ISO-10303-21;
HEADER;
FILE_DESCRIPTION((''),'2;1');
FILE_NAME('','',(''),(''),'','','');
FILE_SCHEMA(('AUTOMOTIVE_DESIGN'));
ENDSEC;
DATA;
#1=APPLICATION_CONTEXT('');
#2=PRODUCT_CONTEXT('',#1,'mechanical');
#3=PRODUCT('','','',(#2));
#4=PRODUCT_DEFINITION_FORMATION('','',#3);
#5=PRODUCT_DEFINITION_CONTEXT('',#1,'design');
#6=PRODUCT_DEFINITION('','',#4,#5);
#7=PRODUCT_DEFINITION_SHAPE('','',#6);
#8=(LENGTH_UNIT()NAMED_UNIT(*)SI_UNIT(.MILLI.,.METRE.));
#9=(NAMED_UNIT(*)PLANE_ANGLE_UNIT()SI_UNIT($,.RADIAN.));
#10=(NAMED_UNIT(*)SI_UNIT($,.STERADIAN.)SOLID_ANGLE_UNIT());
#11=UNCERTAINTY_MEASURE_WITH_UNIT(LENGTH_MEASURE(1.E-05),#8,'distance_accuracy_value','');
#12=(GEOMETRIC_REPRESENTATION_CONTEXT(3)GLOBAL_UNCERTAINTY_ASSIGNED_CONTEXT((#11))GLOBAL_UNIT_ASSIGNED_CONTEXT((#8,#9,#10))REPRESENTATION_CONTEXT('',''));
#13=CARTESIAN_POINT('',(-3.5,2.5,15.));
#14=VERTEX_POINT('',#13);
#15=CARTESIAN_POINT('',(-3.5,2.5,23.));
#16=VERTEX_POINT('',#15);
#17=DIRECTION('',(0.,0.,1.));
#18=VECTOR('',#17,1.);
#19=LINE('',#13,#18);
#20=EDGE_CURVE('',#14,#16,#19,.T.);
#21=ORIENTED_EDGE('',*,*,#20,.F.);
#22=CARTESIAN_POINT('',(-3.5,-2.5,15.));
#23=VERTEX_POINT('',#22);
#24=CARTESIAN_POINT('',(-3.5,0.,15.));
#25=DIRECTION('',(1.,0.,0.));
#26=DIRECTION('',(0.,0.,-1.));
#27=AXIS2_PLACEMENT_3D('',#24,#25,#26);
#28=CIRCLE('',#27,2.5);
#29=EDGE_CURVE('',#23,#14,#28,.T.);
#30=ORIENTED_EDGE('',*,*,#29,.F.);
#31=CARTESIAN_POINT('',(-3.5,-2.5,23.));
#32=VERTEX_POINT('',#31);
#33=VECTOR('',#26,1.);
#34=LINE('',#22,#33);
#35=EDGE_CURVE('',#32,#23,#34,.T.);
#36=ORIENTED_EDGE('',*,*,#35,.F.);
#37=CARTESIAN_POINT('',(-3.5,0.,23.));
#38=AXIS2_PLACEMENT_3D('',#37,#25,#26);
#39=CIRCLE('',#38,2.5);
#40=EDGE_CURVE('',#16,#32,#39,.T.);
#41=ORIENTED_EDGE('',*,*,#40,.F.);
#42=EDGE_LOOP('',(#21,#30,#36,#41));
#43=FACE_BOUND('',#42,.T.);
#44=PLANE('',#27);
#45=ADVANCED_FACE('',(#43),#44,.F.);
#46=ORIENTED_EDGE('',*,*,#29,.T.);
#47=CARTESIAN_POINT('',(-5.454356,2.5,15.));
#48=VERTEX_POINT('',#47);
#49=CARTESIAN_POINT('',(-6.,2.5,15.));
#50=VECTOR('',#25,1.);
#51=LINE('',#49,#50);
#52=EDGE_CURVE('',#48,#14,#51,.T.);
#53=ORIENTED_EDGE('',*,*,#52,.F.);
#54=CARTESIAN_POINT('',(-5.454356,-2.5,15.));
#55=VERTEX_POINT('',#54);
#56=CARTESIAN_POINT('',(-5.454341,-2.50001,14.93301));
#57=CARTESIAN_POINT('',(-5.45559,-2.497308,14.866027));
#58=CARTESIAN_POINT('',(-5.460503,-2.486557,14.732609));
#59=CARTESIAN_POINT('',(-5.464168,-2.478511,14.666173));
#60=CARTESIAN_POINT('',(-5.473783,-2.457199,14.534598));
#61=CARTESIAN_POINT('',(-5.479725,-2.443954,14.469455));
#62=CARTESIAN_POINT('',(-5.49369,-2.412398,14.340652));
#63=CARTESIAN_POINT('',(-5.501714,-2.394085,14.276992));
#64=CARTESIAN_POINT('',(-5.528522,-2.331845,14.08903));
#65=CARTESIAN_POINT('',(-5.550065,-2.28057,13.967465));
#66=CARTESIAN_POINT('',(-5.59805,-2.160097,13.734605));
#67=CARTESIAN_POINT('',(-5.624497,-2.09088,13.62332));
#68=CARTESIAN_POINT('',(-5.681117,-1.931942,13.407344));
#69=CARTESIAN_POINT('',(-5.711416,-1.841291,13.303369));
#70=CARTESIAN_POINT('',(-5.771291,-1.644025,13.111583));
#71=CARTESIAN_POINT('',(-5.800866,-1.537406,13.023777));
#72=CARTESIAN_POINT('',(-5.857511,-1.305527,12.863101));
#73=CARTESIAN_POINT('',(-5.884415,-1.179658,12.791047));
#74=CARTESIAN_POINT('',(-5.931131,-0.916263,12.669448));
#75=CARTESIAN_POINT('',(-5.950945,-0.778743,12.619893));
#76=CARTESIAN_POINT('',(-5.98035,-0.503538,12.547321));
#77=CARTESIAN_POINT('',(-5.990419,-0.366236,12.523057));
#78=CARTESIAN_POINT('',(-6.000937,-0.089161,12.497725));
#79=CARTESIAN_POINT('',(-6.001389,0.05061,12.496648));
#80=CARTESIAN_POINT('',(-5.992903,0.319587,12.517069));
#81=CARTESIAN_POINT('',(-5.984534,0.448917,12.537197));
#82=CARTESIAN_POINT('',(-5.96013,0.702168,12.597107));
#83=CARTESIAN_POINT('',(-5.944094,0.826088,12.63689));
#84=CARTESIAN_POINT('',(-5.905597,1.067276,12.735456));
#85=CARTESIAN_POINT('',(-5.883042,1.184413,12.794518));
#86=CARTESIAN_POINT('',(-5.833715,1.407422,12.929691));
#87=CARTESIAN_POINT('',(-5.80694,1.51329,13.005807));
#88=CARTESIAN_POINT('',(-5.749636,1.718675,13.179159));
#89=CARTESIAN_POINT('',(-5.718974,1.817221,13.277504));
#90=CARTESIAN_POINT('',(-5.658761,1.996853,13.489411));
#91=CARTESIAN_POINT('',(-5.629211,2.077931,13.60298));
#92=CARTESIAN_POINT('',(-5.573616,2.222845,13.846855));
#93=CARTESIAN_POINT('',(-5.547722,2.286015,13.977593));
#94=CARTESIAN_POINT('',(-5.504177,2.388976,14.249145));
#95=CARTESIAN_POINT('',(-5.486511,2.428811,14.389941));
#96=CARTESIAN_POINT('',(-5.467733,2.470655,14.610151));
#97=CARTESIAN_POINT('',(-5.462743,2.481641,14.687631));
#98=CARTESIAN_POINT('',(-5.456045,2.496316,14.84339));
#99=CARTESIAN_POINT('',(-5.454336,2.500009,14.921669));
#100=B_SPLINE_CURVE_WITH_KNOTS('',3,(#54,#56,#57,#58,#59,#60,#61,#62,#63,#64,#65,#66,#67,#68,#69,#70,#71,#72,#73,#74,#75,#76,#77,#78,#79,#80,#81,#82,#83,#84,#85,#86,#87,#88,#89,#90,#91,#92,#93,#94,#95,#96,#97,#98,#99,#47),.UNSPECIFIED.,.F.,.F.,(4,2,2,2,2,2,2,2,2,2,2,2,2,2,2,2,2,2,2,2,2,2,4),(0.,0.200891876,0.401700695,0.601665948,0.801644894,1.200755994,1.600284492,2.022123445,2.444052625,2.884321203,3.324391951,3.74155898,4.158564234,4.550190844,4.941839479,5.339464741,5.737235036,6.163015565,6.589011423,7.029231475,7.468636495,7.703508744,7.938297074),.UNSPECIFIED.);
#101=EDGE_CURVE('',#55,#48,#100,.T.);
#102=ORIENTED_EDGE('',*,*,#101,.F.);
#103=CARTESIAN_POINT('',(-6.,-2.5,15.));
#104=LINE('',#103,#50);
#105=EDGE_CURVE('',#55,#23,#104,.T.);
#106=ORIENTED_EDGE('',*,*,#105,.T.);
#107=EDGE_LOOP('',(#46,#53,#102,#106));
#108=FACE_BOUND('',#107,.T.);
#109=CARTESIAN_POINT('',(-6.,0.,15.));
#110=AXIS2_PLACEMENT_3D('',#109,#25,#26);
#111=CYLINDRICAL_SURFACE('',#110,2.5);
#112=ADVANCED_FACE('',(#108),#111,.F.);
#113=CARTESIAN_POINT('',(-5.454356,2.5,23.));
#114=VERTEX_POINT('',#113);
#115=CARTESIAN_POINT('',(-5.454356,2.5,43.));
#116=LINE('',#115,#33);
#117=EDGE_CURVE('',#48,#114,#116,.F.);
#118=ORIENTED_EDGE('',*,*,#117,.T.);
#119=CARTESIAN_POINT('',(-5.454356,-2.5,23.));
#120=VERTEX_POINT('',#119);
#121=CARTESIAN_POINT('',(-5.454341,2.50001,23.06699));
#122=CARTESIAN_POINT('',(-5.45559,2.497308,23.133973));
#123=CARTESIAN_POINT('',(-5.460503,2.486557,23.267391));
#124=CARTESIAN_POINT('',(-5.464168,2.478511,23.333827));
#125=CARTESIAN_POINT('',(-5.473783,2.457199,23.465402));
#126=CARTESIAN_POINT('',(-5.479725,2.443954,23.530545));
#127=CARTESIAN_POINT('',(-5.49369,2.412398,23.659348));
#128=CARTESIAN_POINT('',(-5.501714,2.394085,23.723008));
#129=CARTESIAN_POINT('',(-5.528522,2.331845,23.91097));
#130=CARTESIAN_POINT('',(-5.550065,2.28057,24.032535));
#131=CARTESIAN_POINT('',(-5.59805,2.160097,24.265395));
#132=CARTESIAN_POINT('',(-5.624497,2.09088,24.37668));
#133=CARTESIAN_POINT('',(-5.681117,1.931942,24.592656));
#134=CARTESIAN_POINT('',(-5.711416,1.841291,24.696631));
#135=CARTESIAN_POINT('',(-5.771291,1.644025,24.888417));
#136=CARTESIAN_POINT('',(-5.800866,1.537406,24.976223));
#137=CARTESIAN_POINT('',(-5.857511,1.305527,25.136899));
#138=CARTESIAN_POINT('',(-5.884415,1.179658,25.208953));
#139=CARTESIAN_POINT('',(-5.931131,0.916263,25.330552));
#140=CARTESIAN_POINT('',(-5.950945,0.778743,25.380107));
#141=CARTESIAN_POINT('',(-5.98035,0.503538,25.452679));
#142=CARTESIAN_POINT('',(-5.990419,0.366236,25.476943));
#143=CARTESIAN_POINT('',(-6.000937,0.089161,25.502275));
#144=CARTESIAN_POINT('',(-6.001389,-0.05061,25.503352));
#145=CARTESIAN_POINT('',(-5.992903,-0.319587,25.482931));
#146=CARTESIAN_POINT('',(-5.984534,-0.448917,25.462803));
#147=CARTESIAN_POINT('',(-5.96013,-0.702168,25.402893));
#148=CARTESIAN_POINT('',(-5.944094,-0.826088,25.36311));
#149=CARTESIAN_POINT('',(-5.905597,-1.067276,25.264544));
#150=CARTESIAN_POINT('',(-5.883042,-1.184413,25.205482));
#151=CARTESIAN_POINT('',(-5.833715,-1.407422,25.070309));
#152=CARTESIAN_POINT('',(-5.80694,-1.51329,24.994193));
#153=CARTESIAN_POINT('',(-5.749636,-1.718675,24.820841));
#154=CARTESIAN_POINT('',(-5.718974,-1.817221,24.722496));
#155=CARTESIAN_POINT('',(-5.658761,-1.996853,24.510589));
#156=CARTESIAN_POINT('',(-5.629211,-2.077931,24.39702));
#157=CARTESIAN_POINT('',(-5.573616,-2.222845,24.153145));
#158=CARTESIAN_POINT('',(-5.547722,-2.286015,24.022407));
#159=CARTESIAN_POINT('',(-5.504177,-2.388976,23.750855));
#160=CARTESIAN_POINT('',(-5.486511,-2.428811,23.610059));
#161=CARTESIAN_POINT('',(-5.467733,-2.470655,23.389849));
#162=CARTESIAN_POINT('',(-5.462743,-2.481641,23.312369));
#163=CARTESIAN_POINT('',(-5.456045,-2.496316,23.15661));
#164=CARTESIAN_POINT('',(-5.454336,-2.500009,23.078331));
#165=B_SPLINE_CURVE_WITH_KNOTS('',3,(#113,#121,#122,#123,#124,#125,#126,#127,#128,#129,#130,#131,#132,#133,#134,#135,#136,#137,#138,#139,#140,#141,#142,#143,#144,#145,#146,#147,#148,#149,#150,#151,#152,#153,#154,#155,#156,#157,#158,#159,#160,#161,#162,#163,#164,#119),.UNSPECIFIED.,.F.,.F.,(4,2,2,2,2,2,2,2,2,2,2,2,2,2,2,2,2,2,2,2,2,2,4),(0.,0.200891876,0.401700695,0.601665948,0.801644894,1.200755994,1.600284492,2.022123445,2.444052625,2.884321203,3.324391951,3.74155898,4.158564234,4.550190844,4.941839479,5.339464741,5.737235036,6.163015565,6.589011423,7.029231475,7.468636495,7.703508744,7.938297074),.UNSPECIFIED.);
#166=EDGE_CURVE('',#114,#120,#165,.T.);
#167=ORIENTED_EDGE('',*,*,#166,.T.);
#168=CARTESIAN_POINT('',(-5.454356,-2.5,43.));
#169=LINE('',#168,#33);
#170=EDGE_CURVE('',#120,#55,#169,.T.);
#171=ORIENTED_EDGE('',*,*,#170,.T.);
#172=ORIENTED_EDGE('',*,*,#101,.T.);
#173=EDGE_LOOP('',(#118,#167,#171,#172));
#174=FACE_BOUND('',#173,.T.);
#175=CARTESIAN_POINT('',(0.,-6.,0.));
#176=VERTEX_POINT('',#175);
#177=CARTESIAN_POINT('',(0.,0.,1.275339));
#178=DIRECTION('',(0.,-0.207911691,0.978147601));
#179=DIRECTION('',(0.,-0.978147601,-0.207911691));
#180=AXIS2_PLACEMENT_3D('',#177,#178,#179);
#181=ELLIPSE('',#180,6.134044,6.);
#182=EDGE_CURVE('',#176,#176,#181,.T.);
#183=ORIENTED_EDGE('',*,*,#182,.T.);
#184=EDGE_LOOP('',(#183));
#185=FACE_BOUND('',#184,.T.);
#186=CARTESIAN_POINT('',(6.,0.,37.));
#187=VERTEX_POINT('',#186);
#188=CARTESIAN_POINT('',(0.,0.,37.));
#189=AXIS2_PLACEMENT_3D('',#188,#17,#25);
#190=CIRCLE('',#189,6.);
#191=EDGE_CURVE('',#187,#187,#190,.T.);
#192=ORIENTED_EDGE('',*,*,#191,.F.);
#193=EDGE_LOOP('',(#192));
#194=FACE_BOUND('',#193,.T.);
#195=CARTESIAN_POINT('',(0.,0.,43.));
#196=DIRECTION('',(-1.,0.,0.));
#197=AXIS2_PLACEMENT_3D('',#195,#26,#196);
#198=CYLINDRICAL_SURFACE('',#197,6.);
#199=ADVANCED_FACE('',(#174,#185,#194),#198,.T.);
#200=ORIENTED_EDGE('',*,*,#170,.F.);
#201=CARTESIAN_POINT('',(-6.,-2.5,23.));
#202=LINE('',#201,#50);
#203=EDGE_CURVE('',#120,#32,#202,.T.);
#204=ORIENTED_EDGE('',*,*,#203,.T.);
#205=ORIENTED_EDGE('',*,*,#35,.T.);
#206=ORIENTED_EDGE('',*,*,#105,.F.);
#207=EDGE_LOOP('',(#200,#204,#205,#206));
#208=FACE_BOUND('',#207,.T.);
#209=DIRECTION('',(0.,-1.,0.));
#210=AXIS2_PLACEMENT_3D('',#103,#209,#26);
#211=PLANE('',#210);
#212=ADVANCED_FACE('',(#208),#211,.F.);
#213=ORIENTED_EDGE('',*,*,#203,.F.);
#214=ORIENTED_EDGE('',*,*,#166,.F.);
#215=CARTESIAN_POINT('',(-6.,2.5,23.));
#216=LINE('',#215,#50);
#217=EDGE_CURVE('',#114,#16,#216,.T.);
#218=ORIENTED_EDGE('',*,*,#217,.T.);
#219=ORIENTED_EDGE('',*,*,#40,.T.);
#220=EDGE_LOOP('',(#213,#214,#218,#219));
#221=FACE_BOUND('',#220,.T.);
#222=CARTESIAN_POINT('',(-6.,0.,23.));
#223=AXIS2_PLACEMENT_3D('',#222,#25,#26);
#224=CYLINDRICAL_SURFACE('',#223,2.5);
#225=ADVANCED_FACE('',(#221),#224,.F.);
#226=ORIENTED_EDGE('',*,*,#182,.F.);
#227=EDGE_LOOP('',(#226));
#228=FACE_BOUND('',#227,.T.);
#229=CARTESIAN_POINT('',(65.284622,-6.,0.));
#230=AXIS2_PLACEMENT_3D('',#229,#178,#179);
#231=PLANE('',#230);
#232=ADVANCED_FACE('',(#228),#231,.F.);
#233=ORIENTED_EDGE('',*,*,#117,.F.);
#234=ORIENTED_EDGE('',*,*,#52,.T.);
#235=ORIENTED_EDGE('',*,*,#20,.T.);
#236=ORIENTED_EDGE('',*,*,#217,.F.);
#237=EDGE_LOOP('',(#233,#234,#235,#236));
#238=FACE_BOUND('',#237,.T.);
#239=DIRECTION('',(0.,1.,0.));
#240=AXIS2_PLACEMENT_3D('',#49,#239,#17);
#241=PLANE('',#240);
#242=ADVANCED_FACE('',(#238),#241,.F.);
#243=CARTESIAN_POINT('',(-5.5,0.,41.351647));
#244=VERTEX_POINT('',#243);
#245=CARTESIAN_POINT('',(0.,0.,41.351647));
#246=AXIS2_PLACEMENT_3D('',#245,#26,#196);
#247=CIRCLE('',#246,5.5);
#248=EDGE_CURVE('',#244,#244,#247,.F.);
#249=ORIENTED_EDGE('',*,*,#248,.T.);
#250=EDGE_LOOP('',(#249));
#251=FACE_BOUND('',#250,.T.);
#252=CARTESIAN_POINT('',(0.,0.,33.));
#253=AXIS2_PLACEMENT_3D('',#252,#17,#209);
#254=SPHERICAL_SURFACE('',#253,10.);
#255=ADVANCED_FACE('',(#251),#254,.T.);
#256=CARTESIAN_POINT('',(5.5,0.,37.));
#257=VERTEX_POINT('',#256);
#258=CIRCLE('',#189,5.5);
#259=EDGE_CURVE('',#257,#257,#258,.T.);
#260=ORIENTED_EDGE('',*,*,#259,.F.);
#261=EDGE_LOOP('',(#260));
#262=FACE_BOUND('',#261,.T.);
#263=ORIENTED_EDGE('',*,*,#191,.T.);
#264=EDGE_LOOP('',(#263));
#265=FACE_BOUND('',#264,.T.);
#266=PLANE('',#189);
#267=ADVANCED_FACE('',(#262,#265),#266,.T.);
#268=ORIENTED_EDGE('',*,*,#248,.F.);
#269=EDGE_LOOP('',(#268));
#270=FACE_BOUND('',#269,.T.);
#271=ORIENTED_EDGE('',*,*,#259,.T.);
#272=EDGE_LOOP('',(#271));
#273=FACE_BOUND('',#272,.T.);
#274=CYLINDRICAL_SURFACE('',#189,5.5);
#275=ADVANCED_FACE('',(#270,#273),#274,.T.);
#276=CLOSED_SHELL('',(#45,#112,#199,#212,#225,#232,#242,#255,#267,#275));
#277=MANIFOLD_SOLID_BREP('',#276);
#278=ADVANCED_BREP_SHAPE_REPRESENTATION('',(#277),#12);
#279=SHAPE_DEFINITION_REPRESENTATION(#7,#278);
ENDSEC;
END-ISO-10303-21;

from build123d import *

# Parameters (mm, degrees)
SKETCH_1_R               = 6
EXTRUDE_1_DEPTH          = 43
SKETCH_2_OUTSIDE_W       = 23.246
SKETCH_2_OUTSIDE_H       = 23.246
SKETCH_2_OUTSIDE_R       = 5.5
CUT_EXTRUDE_1_DEPTH      = 6
CUT_EXTRUDE_2_DEPTH      = 44.829214002
CUT_EXTRUDE_2_DEPTH_BACK = 44.829214002
CUT_EXTRUDE_START        = -3.5
CUT_EXTRUDE_3_DEPTH      = 41.329214002


# Read off the part's stored shape, not the designer's step: 替换面1
with BuildPart() as part:
    # 草图1 → 凸台-拉伸1 (new body)
    with BuildSketch(Plane.XY):
        Circle(SKETCH_1_R)
    extrude(amount=EXTRUDE_1_DEPTH)

    # 草图2 outside → 切除-拉伸1 (cut)
    with BuildSketch(Plane.XY.offset(43)):
        Rectangle(SKETCH_2_OUTSIDE_W, SKETCH_2_OUTSIDE_H)
        Circle(SKETCH_2_OUTSIDE_R, mode=Mode.SUBTRACT)
    extrude(amount=-CUT_EXTRUDE_1_DEPTH, mode=Mode.SUBTRACT)

    # 替换面1 outline → 替换面1 (revolve, cut)
    with BuildSketch(Plane.XZ):
        with BuildLine():
            ThreePointArc((0, 43), (2.870847837, 42.579051764), (5.500000008, 41.351646539))
            Line((5.500000008, 41.351646539), (5.500000008, 43))
            Line((5.500000008, 43), (0, 43))
        make_face()
    revolve(axis=Axis((0, 0, 0), (0, 0, 1)), mode=Mode.SUBTRACT)

    # 草图5 → 切除-拉伸2 (cut, two sides: drawn at the far end of the back side and taken through both)
    with BuildSketch(Plane(origin=(0, 0, 0), x_dir=(0, 0, -1), z_dir=(1, 0, 0)).offset(-CUT_EXTRUDE_2_DEPTH_BACK)):
        Polygon((20.642732015, -103.11641858), (0, -6), (-2.55067874, 6), (-23.193410755, 103.11641858), (171.039426405, 144.40188261), (214.875569175, -61.83095455), align=None)
    extrude(amount=CUT_EXTRUDE_2_DEPTH + CUT_EXTRUDE_2_DEPTH_BACK, mode=Mode.SUBTRACT)

    # 草图6 → 切除-拉伸3 (cut, through all)
    with BuildSketch(Plane(origin=(0, 0, 0), x_dir=(0, 0, -1), z_dir=(1, 0, 0)).offset(CUT_EXTRUDE_START)):
        with BuildLine():
            Line((-15, -2.5), (-23, -2.5))
            ThreePointArc((-23, -2.5), (-25.5, 0), (-23, 2.5))
            Line((-23, 2.5), (-15, 2.5))
            ThreePointArc((-15, 2.5), (-12.5, 0), (-15, -2.5))
        make_face()
    extrude(amount=-CUT_EXTRUDE_3_DEPTH, mode=Mode.SUBTRACT)


solid = part.part
